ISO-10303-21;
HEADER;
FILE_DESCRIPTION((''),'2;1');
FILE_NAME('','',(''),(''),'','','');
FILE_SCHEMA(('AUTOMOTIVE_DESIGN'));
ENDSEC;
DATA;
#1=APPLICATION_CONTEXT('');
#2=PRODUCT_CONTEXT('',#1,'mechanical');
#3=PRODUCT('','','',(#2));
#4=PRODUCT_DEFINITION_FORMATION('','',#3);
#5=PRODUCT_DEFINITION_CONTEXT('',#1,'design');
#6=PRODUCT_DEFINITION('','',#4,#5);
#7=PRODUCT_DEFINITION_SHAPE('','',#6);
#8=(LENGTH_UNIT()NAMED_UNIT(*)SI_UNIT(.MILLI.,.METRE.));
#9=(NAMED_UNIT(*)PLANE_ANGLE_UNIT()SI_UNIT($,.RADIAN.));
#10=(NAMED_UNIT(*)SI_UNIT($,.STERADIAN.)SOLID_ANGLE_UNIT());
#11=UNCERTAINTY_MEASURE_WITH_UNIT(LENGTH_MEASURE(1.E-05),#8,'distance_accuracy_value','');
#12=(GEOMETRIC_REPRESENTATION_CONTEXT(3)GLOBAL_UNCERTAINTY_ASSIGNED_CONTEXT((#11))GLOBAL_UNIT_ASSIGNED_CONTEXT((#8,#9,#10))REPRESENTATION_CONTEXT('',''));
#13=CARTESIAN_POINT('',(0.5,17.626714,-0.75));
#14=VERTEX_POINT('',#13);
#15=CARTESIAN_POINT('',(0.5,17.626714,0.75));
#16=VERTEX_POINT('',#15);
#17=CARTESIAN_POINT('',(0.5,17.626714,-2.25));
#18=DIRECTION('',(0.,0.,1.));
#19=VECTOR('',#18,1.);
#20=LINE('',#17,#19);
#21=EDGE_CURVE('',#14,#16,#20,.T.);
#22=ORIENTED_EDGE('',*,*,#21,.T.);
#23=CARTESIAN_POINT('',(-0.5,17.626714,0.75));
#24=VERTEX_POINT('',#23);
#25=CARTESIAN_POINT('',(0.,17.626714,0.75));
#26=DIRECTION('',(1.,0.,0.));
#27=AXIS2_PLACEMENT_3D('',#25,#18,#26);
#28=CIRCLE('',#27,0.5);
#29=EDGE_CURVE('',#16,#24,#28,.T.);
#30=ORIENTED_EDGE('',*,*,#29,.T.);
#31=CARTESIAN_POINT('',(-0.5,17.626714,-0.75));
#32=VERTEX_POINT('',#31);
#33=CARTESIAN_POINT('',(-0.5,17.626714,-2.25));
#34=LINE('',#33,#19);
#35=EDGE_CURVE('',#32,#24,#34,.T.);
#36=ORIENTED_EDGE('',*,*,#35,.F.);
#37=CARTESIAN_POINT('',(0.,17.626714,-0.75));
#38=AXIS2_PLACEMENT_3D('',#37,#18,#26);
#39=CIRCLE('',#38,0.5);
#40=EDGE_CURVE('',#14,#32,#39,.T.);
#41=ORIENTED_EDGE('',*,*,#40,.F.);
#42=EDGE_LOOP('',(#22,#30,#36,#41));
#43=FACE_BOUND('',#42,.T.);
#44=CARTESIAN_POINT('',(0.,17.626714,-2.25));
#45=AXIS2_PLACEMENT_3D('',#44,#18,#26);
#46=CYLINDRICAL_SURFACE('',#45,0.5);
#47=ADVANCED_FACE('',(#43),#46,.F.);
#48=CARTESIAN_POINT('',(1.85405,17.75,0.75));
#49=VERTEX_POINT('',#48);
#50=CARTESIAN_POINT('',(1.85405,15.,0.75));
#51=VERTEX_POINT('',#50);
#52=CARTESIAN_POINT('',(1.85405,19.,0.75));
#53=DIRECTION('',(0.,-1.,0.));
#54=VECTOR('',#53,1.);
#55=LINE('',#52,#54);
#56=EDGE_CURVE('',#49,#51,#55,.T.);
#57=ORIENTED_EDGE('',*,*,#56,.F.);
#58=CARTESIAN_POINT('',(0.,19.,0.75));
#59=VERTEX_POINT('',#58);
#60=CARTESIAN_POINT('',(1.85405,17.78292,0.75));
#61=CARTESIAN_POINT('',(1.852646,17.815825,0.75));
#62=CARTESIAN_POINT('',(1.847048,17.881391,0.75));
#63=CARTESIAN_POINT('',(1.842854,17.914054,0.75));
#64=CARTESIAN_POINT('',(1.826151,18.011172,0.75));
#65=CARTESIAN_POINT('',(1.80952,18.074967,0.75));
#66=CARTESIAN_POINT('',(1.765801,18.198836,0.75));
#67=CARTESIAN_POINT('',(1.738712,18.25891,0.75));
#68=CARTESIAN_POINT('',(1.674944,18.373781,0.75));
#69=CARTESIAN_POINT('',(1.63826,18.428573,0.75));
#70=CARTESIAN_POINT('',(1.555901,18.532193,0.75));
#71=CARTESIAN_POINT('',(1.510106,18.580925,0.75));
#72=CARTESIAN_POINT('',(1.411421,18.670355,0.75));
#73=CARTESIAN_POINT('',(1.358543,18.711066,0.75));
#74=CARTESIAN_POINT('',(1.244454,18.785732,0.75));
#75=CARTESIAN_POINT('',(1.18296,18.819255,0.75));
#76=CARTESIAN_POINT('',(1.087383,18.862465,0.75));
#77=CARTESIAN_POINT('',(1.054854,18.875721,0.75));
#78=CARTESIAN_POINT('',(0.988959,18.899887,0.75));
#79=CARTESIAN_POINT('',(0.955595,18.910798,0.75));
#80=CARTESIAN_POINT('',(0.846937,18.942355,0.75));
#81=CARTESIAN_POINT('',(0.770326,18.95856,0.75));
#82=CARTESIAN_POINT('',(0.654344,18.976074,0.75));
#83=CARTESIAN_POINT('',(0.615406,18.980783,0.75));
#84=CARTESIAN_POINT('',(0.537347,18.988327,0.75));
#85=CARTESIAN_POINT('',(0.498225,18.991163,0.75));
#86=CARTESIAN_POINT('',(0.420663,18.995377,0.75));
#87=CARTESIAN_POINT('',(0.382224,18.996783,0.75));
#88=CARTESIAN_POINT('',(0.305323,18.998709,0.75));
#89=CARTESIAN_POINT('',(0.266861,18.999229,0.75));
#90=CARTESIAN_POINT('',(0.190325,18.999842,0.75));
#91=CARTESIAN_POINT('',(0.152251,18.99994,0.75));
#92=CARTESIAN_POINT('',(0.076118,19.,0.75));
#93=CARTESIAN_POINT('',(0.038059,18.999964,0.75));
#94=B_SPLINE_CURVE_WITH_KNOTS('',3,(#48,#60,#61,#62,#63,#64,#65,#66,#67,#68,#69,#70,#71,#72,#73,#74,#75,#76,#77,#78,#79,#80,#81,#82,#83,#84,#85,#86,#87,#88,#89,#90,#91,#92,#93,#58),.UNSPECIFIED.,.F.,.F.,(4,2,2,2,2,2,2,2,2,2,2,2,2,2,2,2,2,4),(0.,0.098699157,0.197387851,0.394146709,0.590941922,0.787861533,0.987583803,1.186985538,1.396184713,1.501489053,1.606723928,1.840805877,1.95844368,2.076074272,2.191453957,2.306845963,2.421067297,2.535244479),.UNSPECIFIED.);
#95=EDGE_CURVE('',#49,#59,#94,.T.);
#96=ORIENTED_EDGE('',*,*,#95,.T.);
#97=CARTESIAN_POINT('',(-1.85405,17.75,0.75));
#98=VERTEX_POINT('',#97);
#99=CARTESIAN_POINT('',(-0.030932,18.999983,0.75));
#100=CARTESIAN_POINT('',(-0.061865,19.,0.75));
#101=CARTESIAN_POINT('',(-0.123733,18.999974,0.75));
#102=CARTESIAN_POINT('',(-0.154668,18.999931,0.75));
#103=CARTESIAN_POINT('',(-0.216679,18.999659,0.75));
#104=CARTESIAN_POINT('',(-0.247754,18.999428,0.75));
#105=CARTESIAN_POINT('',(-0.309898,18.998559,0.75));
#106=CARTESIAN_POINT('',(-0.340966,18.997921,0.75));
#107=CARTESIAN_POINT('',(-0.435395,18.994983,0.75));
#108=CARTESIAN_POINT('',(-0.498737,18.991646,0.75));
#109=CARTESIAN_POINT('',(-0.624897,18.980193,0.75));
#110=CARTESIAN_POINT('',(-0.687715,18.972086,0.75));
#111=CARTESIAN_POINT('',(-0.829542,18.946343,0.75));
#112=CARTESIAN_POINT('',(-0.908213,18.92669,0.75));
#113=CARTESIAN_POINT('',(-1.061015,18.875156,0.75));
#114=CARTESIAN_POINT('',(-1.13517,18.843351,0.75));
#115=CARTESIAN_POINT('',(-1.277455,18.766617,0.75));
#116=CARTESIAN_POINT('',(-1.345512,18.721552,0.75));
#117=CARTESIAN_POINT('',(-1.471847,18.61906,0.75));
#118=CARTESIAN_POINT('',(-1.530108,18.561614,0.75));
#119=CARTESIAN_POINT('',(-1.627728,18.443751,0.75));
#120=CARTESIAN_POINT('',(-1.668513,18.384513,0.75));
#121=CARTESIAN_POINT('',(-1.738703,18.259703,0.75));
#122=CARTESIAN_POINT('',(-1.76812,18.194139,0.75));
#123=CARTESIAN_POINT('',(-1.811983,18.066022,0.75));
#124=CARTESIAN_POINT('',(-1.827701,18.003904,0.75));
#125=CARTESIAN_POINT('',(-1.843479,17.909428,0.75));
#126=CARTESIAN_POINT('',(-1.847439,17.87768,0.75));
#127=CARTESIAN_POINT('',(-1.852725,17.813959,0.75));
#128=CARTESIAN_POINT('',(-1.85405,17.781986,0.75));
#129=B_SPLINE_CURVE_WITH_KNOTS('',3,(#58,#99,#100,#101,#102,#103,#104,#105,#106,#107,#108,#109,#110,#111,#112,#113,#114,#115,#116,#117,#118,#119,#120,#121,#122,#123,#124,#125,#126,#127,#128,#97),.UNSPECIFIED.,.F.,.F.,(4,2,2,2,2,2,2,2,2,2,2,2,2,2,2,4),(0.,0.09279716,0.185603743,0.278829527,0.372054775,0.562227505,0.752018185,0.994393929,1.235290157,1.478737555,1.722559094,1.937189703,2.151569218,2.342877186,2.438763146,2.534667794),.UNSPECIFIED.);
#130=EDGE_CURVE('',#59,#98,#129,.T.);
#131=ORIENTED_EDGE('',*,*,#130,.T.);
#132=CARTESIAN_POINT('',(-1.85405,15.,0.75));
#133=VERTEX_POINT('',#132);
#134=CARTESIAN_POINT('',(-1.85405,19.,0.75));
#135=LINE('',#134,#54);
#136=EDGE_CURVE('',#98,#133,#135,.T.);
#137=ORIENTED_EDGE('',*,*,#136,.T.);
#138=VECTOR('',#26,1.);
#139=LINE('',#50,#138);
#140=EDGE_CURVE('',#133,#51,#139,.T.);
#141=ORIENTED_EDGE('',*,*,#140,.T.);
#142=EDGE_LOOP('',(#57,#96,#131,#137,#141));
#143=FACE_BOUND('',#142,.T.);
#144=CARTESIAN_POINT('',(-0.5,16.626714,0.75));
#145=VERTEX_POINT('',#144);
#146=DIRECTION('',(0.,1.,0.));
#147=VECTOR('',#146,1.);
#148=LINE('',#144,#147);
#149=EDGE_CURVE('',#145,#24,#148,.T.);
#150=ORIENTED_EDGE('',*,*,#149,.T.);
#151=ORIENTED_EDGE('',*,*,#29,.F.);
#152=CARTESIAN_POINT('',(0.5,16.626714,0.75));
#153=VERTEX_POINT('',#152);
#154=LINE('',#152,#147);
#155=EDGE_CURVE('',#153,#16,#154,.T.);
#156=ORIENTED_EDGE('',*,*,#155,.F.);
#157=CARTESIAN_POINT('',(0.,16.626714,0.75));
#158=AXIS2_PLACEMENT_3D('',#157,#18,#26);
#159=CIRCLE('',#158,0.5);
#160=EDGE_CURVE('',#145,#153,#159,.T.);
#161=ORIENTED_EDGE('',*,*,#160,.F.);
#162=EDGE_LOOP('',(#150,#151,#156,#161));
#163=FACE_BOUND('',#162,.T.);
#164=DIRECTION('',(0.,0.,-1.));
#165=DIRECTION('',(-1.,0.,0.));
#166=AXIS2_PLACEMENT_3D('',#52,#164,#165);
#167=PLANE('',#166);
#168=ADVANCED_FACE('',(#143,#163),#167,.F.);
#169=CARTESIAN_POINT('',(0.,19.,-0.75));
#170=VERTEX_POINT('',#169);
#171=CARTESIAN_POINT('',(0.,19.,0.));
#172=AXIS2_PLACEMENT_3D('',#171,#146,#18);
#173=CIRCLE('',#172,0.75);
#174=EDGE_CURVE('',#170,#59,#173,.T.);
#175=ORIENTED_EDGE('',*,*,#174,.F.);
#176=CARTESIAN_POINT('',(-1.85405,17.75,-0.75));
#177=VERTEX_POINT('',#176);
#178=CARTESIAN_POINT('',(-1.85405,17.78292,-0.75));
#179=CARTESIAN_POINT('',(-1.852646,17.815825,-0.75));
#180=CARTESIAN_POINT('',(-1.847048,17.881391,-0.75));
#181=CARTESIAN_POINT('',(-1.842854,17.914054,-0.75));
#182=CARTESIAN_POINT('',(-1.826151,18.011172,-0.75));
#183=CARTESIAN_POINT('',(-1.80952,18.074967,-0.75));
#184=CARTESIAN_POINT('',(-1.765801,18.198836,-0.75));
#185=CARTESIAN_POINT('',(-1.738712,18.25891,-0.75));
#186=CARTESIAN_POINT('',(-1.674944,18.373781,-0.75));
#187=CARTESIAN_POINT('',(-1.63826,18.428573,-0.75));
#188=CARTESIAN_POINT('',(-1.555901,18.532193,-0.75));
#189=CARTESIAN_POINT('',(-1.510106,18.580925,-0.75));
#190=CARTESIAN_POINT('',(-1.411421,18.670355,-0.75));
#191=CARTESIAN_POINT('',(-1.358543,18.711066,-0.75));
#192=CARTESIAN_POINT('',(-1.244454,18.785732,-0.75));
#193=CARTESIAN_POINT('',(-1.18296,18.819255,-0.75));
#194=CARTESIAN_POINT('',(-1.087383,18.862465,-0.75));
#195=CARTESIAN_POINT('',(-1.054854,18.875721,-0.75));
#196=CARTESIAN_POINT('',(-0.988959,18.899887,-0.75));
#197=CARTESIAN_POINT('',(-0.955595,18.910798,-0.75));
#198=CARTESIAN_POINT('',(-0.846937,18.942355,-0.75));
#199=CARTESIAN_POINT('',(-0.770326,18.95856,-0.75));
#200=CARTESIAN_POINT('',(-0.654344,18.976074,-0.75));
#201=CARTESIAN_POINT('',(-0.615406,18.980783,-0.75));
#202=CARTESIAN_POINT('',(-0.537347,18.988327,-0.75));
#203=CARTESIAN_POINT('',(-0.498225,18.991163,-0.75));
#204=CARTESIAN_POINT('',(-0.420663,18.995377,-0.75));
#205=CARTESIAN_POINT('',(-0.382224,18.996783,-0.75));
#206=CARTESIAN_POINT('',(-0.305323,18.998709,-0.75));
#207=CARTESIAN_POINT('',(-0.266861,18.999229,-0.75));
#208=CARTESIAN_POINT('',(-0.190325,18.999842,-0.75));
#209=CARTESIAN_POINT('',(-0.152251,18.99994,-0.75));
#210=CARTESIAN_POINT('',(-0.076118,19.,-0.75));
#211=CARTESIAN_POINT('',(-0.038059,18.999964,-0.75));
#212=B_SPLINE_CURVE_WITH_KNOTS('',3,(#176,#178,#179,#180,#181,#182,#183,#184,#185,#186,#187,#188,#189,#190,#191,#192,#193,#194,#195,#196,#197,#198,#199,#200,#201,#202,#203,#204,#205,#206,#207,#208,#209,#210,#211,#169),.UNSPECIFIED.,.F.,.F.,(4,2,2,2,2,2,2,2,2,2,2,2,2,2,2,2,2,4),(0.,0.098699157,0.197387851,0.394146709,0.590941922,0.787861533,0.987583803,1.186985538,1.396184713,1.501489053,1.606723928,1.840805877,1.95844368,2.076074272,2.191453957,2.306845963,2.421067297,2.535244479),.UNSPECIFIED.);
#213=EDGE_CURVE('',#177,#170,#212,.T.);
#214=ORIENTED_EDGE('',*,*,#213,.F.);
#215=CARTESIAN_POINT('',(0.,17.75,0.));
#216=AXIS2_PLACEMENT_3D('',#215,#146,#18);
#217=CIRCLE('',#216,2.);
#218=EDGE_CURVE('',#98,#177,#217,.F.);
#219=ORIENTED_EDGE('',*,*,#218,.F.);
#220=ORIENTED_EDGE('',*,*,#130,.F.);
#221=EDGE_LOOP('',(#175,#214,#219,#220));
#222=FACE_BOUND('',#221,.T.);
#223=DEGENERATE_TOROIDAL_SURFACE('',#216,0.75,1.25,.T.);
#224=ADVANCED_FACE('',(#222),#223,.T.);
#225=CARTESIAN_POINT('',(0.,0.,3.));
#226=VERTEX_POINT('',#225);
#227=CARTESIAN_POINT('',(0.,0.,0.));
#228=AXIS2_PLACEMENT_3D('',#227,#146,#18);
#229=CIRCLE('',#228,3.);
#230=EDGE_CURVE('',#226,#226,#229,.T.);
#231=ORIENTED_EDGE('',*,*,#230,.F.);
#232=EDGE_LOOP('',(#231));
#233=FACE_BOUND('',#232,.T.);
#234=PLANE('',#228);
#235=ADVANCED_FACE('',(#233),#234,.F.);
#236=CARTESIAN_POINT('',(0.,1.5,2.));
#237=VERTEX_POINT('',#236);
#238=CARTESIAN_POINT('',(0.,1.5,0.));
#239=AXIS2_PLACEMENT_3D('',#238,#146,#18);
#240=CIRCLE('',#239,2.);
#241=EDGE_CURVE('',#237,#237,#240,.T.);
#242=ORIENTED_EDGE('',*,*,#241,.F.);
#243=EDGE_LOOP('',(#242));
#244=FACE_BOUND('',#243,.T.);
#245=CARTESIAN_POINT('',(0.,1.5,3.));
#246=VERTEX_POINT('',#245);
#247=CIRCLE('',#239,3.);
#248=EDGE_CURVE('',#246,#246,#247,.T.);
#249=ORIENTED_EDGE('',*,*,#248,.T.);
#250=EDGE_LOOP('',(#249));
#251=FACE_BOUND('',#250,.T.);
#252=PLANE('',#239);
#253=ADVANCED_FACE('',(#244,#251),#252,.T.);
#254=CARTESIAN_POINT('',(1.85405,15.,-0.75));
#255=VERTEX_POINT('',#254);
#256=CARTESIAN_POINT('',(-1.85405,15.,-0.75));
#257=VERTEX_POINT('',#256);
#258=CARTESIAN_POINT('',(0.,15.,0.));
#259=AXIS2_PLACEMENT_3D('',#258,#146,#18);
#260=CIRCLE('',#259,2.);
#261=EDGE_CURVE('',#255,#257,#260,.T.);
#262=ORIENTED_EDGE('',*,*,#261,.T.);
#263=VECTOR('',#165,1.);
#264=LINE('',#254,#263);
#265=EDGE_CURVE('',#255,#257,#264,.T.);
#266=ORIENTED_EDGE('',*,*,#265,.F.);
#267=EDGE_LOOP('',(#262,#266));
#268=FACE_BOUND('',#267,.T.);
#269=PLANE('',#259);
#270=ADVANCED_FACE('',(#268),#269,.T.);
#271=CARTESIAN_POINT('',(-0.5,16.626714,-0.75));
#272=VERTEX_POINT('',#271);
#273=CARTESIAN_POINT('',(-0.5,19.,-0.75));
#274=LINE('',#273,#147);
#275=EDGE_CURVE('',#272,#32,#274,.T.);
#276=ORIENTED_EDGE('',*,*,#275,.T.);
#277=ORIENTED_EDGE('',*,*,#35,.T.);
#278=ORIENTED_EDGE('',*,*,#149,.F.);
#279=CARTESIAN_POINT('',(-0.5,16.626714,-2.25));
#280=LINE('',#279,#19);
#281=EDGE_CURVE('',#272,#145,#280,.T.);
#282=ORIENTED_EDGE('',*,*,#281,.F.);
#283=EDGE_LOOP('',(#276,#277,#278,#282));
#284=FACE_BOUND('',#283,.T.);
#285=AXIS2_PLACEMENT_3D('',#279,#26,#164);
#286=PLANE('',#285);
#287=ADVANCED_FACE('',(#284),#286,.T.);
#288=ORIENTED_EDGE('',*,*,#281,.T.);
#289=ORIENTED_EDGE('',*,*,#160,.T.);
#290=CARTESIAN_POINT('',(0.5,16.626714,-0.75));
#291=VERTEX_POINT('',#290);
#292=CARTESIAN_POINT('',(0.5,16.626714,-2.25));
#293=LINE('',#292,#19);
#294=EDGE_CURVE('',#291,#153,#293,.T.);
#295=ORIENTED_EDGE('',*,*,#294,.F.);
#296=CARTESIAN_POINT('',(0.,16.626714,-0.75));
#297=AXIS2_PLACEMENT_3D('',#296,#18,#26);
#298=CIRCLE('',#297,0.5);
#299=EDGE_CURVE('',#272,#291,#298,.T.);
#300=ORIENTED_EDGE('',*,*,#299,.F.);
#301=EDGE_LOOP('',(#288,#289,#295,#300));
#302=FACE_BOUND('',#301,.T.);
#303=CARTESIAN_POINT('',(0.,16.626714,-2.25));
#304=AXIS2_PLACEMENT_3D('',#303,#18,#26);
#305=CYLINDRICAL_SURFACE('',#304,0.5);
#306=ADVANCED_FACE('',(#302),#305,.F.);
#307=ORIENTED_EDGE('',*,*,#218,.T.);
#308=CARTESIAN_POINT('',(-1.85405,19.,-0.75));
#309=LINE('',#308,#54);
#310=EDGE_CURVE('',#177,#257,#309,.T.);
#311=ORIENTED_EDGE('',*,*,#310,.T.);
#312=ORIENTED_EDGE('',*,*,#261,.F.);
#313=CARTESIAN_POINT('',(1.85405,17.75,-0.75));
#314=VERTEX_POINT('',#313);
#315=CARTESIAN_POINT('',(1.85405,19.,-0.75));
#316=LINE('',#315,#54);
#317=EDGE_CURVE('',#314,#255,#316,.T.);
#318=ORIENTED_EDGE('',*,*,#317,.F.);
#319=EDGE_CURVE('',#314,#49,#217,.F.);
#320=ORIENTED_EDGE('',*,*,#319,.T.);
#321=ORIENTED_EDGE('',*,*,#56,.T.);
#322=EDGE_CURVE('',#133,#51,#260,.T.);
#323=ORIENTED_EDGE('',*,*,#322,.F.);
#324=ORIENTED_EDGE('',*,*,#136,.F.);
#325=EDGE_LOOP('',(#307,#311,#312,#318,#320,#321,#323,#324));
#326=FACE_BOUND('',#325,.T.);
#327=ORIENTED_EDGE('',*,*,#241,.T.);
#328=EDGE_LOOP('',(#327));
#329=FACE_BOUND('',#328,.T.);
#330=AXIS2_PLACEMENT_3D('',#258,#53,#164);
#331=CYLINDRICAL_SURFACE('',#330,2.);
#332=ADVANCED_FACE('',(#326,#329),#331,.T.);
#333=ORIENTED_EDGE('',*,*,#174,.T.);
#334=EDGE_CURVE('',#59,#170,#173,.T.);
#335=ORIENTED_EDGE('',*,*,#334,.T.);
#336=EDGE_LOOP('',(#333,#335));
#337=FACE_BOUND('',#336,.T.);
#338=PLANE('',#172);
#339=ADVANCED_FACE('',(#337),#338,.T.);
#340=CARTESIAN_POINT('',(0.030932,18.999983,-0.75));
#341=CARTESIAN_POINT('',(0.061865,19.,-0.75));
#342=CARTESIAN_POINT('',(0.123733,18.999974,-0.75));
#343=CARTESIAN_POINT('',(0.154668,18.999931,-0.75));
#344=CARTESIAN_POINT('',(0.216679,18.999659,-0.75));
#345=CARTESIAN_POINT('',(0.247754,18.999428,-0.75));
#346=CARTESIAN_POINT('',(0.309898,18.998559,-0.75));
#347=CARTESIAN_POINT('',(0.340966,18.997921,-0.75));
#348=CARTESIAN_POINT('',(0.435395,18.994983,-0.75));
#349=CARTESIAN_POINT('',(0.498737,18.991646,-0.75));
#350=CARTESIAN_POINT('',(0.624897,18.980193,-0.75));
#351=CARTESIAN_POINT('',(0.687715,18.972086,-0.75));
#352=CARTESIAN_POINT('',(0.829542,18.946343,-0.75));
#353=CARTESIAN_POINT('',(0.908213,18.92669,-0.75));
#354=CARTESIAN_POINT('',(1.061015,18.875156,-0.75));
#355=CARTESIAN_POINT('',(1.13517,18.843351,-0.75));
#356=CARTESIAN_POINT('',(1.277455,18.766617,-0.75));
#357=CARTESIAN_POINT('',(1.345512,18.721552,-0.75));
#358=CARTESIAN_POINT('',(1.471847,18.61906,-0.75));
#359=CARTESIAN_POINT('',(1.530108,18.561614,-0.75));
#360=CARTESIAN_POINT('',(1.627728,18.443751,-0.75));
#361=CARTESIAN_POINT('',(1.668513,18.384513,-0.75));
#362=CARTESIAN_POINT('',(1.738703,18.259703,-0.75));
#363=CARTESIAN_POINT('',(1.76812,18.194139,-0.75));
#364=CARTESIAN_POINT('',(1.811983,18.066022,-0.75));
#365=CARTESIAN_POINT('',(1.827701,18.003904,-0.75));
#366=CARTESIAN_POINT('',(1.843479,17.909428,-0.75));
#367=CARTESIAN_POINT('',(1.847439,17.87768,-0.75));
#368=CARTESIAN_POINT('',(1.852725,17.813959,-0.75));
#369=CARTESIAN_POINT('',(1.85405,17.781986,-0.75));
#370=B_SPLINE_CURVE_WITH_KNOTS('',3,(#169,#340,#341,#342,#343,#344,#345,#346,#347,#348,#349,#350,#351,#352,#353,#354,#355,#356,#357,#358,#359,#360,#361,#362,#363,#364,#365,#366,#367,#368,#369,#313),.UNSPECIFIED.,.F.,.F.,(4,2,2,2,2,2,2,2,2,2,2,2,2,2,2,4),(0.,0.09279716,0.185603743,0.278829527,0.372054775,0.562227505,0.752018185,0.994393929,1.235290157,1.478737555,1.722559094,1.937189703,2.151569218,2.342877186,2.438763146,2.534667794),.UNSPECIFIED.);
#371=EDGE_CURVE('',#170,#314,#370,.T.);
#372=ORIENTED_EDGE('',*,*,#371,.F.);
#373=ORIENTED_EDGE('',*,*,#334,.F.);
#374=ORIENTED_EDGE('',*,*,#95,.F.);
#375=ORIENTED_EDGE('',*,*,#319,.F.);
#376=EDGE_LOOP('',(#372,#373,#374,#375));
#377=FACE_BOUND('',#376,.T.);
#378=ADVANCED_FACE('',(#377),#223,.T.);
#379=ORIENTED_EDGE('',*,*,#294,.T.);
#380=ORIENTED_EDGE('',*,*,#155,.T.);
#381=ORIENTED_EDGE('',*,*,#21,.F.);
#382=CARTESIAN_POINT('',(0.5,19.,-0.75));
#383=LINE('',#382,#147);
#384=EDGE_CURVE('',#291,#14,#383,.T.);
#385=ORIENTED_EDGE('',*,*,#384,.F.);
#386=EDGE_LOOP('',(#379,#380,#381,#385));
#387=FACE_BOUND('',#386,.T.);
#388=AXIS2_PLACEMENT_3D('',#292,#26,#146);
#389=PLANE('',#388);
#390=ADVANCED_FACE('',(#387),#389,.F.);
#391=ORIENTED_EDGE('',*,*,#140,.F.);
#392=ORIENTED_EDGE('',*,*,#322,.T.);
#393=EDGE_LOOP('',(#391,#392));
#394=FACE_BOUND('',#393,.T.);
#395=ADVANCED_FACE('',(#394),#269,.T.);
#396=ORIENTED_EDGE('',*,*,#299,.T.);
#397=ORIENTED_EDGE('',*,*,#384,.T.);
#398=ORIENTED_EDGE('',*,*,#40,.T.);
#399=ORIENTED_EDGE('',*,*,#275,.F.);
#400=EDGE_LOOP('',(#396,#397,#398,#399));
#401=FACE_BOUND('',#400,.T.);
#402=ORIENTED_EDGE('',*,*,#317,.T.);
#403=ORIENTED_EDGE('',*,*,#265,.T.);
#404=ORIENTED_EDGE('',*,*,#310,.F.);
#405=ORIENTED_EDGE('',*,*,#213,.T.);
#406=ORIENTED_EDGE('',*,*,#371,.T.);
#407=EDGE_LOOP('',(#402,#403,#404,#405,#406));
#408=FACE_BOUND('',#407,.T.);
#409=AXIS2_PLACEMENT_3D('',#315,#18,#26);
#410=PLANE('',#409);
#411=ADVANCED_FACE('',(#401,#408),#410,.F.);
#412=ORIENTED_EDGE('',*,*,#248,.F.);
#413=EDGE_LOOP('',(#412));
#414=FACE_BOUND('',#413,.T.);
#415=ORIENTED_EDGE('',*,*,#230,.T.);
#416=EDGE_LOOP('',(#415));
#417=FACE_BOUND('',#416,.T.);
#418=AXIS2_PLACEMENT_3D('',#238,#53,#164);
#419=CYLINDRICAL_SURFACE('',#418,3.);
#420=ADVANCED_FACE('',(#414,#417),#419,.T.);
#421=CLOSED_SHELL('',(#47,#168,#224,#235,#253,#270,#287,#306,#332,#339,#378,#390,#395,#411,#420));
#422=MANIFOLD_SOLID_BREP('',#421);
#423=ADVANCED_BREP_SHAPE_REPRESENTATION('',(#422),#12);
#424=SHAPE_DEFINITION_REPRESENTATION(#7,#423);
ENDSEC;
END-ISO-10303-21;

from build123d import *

# Parameters (mm, degrees)
SKETCH1_R           = 3
BOSS_EXTRUDE1_DEPTH = 1.5
SKETCH2_R           = 2
BOSS_EXTRUDE2_DEPTH = 13.5
BOSS_EXTRUDE3_DEPTH = 4
CUT_EXTRUDE1_DEPTH  = 3
FILLET5_R           = 1.25


with BuildPart() as part:
    # Sketch1 → Boss-Extrude1 (new body)
    with BuildSketch(Plane(origin=(0, 0, 0), x_dir=(1, 0, 0), z_dir=(0, 1, 0))):
        with Locations(Location((0, 0, 0), (0, 0, 270))):
            Circle(SKETCH1_R)
    extrude(amount=BOSS_EXTRUDE1_DEPTH)

    # Sketch2 → Boss-Extrude2 (add)
    with BuildSketch(Plane(origin=(0, 1.5, 0), x_dir=(1, 0, 0), z_dir=(0, 1, 0))):
        with Locations(Location((0, 0, 0), (0, 0, 270))):
            Circle(SKETCH2_R)
    extrude(amount=BOSS_EXTRUDE2_DEPTH)

    # Sketch6 → Boss-Extrude3 (add)
    with BuildSketch(Plane(origin=(0, 15, 0), x_dir=(1, 0, 0), z_dir=(0, 1, 0))):
        with BuildLine():
            Line((1.854049622, 0.75), (-1.854049622, 0.75))
            ThreePointArc((-1.854049622, 0.75), (-2, 0), (-1.854049622, -0.75))
            Line((-1.854049622, -0.75), (1.854049622, -0.75))
            ThreePointArc((1.854049622, -0.75), (2, 0), (1.854049622, 0.75))
        make_face()
    extrude(amount=BOSS_EXTRUDE3_DEPTH)

    # Sketch7 → Cut-Extrude1 (cut)
    with BuildSketch(Plane.XY.offset(0.75)):
        with BuildLine():
            Line((-0.5, 16.62671351), (-0.5, 17.62671351))
            ThreePointArc((-0.5, 17.62671351), (0, 18.12671351), (0.5, 17.62671351))
            Line((0.5, 17.62671351), (0.5, 16.62671351))
            ThreePointArc((0.5, 16.62671351), (0, 16.12671351), (-0.5, 16.62671351))
        make_face()
    extrude(amount=-CUT_EXTRUDE1_DEPTH, mode=Mode.SUBTRACT)

    # Fillet5
    fillet5_edges = [part.edges().sort_by_distance(p)[0] for p in [
        (-2, 19, 0),
        (2, 19, 0),
    ]]
    fillet(fillet5_edges, radius=FILLET5_R - 0.0001)  # a hair under: the kernel refuses the full size


solid = part.part
